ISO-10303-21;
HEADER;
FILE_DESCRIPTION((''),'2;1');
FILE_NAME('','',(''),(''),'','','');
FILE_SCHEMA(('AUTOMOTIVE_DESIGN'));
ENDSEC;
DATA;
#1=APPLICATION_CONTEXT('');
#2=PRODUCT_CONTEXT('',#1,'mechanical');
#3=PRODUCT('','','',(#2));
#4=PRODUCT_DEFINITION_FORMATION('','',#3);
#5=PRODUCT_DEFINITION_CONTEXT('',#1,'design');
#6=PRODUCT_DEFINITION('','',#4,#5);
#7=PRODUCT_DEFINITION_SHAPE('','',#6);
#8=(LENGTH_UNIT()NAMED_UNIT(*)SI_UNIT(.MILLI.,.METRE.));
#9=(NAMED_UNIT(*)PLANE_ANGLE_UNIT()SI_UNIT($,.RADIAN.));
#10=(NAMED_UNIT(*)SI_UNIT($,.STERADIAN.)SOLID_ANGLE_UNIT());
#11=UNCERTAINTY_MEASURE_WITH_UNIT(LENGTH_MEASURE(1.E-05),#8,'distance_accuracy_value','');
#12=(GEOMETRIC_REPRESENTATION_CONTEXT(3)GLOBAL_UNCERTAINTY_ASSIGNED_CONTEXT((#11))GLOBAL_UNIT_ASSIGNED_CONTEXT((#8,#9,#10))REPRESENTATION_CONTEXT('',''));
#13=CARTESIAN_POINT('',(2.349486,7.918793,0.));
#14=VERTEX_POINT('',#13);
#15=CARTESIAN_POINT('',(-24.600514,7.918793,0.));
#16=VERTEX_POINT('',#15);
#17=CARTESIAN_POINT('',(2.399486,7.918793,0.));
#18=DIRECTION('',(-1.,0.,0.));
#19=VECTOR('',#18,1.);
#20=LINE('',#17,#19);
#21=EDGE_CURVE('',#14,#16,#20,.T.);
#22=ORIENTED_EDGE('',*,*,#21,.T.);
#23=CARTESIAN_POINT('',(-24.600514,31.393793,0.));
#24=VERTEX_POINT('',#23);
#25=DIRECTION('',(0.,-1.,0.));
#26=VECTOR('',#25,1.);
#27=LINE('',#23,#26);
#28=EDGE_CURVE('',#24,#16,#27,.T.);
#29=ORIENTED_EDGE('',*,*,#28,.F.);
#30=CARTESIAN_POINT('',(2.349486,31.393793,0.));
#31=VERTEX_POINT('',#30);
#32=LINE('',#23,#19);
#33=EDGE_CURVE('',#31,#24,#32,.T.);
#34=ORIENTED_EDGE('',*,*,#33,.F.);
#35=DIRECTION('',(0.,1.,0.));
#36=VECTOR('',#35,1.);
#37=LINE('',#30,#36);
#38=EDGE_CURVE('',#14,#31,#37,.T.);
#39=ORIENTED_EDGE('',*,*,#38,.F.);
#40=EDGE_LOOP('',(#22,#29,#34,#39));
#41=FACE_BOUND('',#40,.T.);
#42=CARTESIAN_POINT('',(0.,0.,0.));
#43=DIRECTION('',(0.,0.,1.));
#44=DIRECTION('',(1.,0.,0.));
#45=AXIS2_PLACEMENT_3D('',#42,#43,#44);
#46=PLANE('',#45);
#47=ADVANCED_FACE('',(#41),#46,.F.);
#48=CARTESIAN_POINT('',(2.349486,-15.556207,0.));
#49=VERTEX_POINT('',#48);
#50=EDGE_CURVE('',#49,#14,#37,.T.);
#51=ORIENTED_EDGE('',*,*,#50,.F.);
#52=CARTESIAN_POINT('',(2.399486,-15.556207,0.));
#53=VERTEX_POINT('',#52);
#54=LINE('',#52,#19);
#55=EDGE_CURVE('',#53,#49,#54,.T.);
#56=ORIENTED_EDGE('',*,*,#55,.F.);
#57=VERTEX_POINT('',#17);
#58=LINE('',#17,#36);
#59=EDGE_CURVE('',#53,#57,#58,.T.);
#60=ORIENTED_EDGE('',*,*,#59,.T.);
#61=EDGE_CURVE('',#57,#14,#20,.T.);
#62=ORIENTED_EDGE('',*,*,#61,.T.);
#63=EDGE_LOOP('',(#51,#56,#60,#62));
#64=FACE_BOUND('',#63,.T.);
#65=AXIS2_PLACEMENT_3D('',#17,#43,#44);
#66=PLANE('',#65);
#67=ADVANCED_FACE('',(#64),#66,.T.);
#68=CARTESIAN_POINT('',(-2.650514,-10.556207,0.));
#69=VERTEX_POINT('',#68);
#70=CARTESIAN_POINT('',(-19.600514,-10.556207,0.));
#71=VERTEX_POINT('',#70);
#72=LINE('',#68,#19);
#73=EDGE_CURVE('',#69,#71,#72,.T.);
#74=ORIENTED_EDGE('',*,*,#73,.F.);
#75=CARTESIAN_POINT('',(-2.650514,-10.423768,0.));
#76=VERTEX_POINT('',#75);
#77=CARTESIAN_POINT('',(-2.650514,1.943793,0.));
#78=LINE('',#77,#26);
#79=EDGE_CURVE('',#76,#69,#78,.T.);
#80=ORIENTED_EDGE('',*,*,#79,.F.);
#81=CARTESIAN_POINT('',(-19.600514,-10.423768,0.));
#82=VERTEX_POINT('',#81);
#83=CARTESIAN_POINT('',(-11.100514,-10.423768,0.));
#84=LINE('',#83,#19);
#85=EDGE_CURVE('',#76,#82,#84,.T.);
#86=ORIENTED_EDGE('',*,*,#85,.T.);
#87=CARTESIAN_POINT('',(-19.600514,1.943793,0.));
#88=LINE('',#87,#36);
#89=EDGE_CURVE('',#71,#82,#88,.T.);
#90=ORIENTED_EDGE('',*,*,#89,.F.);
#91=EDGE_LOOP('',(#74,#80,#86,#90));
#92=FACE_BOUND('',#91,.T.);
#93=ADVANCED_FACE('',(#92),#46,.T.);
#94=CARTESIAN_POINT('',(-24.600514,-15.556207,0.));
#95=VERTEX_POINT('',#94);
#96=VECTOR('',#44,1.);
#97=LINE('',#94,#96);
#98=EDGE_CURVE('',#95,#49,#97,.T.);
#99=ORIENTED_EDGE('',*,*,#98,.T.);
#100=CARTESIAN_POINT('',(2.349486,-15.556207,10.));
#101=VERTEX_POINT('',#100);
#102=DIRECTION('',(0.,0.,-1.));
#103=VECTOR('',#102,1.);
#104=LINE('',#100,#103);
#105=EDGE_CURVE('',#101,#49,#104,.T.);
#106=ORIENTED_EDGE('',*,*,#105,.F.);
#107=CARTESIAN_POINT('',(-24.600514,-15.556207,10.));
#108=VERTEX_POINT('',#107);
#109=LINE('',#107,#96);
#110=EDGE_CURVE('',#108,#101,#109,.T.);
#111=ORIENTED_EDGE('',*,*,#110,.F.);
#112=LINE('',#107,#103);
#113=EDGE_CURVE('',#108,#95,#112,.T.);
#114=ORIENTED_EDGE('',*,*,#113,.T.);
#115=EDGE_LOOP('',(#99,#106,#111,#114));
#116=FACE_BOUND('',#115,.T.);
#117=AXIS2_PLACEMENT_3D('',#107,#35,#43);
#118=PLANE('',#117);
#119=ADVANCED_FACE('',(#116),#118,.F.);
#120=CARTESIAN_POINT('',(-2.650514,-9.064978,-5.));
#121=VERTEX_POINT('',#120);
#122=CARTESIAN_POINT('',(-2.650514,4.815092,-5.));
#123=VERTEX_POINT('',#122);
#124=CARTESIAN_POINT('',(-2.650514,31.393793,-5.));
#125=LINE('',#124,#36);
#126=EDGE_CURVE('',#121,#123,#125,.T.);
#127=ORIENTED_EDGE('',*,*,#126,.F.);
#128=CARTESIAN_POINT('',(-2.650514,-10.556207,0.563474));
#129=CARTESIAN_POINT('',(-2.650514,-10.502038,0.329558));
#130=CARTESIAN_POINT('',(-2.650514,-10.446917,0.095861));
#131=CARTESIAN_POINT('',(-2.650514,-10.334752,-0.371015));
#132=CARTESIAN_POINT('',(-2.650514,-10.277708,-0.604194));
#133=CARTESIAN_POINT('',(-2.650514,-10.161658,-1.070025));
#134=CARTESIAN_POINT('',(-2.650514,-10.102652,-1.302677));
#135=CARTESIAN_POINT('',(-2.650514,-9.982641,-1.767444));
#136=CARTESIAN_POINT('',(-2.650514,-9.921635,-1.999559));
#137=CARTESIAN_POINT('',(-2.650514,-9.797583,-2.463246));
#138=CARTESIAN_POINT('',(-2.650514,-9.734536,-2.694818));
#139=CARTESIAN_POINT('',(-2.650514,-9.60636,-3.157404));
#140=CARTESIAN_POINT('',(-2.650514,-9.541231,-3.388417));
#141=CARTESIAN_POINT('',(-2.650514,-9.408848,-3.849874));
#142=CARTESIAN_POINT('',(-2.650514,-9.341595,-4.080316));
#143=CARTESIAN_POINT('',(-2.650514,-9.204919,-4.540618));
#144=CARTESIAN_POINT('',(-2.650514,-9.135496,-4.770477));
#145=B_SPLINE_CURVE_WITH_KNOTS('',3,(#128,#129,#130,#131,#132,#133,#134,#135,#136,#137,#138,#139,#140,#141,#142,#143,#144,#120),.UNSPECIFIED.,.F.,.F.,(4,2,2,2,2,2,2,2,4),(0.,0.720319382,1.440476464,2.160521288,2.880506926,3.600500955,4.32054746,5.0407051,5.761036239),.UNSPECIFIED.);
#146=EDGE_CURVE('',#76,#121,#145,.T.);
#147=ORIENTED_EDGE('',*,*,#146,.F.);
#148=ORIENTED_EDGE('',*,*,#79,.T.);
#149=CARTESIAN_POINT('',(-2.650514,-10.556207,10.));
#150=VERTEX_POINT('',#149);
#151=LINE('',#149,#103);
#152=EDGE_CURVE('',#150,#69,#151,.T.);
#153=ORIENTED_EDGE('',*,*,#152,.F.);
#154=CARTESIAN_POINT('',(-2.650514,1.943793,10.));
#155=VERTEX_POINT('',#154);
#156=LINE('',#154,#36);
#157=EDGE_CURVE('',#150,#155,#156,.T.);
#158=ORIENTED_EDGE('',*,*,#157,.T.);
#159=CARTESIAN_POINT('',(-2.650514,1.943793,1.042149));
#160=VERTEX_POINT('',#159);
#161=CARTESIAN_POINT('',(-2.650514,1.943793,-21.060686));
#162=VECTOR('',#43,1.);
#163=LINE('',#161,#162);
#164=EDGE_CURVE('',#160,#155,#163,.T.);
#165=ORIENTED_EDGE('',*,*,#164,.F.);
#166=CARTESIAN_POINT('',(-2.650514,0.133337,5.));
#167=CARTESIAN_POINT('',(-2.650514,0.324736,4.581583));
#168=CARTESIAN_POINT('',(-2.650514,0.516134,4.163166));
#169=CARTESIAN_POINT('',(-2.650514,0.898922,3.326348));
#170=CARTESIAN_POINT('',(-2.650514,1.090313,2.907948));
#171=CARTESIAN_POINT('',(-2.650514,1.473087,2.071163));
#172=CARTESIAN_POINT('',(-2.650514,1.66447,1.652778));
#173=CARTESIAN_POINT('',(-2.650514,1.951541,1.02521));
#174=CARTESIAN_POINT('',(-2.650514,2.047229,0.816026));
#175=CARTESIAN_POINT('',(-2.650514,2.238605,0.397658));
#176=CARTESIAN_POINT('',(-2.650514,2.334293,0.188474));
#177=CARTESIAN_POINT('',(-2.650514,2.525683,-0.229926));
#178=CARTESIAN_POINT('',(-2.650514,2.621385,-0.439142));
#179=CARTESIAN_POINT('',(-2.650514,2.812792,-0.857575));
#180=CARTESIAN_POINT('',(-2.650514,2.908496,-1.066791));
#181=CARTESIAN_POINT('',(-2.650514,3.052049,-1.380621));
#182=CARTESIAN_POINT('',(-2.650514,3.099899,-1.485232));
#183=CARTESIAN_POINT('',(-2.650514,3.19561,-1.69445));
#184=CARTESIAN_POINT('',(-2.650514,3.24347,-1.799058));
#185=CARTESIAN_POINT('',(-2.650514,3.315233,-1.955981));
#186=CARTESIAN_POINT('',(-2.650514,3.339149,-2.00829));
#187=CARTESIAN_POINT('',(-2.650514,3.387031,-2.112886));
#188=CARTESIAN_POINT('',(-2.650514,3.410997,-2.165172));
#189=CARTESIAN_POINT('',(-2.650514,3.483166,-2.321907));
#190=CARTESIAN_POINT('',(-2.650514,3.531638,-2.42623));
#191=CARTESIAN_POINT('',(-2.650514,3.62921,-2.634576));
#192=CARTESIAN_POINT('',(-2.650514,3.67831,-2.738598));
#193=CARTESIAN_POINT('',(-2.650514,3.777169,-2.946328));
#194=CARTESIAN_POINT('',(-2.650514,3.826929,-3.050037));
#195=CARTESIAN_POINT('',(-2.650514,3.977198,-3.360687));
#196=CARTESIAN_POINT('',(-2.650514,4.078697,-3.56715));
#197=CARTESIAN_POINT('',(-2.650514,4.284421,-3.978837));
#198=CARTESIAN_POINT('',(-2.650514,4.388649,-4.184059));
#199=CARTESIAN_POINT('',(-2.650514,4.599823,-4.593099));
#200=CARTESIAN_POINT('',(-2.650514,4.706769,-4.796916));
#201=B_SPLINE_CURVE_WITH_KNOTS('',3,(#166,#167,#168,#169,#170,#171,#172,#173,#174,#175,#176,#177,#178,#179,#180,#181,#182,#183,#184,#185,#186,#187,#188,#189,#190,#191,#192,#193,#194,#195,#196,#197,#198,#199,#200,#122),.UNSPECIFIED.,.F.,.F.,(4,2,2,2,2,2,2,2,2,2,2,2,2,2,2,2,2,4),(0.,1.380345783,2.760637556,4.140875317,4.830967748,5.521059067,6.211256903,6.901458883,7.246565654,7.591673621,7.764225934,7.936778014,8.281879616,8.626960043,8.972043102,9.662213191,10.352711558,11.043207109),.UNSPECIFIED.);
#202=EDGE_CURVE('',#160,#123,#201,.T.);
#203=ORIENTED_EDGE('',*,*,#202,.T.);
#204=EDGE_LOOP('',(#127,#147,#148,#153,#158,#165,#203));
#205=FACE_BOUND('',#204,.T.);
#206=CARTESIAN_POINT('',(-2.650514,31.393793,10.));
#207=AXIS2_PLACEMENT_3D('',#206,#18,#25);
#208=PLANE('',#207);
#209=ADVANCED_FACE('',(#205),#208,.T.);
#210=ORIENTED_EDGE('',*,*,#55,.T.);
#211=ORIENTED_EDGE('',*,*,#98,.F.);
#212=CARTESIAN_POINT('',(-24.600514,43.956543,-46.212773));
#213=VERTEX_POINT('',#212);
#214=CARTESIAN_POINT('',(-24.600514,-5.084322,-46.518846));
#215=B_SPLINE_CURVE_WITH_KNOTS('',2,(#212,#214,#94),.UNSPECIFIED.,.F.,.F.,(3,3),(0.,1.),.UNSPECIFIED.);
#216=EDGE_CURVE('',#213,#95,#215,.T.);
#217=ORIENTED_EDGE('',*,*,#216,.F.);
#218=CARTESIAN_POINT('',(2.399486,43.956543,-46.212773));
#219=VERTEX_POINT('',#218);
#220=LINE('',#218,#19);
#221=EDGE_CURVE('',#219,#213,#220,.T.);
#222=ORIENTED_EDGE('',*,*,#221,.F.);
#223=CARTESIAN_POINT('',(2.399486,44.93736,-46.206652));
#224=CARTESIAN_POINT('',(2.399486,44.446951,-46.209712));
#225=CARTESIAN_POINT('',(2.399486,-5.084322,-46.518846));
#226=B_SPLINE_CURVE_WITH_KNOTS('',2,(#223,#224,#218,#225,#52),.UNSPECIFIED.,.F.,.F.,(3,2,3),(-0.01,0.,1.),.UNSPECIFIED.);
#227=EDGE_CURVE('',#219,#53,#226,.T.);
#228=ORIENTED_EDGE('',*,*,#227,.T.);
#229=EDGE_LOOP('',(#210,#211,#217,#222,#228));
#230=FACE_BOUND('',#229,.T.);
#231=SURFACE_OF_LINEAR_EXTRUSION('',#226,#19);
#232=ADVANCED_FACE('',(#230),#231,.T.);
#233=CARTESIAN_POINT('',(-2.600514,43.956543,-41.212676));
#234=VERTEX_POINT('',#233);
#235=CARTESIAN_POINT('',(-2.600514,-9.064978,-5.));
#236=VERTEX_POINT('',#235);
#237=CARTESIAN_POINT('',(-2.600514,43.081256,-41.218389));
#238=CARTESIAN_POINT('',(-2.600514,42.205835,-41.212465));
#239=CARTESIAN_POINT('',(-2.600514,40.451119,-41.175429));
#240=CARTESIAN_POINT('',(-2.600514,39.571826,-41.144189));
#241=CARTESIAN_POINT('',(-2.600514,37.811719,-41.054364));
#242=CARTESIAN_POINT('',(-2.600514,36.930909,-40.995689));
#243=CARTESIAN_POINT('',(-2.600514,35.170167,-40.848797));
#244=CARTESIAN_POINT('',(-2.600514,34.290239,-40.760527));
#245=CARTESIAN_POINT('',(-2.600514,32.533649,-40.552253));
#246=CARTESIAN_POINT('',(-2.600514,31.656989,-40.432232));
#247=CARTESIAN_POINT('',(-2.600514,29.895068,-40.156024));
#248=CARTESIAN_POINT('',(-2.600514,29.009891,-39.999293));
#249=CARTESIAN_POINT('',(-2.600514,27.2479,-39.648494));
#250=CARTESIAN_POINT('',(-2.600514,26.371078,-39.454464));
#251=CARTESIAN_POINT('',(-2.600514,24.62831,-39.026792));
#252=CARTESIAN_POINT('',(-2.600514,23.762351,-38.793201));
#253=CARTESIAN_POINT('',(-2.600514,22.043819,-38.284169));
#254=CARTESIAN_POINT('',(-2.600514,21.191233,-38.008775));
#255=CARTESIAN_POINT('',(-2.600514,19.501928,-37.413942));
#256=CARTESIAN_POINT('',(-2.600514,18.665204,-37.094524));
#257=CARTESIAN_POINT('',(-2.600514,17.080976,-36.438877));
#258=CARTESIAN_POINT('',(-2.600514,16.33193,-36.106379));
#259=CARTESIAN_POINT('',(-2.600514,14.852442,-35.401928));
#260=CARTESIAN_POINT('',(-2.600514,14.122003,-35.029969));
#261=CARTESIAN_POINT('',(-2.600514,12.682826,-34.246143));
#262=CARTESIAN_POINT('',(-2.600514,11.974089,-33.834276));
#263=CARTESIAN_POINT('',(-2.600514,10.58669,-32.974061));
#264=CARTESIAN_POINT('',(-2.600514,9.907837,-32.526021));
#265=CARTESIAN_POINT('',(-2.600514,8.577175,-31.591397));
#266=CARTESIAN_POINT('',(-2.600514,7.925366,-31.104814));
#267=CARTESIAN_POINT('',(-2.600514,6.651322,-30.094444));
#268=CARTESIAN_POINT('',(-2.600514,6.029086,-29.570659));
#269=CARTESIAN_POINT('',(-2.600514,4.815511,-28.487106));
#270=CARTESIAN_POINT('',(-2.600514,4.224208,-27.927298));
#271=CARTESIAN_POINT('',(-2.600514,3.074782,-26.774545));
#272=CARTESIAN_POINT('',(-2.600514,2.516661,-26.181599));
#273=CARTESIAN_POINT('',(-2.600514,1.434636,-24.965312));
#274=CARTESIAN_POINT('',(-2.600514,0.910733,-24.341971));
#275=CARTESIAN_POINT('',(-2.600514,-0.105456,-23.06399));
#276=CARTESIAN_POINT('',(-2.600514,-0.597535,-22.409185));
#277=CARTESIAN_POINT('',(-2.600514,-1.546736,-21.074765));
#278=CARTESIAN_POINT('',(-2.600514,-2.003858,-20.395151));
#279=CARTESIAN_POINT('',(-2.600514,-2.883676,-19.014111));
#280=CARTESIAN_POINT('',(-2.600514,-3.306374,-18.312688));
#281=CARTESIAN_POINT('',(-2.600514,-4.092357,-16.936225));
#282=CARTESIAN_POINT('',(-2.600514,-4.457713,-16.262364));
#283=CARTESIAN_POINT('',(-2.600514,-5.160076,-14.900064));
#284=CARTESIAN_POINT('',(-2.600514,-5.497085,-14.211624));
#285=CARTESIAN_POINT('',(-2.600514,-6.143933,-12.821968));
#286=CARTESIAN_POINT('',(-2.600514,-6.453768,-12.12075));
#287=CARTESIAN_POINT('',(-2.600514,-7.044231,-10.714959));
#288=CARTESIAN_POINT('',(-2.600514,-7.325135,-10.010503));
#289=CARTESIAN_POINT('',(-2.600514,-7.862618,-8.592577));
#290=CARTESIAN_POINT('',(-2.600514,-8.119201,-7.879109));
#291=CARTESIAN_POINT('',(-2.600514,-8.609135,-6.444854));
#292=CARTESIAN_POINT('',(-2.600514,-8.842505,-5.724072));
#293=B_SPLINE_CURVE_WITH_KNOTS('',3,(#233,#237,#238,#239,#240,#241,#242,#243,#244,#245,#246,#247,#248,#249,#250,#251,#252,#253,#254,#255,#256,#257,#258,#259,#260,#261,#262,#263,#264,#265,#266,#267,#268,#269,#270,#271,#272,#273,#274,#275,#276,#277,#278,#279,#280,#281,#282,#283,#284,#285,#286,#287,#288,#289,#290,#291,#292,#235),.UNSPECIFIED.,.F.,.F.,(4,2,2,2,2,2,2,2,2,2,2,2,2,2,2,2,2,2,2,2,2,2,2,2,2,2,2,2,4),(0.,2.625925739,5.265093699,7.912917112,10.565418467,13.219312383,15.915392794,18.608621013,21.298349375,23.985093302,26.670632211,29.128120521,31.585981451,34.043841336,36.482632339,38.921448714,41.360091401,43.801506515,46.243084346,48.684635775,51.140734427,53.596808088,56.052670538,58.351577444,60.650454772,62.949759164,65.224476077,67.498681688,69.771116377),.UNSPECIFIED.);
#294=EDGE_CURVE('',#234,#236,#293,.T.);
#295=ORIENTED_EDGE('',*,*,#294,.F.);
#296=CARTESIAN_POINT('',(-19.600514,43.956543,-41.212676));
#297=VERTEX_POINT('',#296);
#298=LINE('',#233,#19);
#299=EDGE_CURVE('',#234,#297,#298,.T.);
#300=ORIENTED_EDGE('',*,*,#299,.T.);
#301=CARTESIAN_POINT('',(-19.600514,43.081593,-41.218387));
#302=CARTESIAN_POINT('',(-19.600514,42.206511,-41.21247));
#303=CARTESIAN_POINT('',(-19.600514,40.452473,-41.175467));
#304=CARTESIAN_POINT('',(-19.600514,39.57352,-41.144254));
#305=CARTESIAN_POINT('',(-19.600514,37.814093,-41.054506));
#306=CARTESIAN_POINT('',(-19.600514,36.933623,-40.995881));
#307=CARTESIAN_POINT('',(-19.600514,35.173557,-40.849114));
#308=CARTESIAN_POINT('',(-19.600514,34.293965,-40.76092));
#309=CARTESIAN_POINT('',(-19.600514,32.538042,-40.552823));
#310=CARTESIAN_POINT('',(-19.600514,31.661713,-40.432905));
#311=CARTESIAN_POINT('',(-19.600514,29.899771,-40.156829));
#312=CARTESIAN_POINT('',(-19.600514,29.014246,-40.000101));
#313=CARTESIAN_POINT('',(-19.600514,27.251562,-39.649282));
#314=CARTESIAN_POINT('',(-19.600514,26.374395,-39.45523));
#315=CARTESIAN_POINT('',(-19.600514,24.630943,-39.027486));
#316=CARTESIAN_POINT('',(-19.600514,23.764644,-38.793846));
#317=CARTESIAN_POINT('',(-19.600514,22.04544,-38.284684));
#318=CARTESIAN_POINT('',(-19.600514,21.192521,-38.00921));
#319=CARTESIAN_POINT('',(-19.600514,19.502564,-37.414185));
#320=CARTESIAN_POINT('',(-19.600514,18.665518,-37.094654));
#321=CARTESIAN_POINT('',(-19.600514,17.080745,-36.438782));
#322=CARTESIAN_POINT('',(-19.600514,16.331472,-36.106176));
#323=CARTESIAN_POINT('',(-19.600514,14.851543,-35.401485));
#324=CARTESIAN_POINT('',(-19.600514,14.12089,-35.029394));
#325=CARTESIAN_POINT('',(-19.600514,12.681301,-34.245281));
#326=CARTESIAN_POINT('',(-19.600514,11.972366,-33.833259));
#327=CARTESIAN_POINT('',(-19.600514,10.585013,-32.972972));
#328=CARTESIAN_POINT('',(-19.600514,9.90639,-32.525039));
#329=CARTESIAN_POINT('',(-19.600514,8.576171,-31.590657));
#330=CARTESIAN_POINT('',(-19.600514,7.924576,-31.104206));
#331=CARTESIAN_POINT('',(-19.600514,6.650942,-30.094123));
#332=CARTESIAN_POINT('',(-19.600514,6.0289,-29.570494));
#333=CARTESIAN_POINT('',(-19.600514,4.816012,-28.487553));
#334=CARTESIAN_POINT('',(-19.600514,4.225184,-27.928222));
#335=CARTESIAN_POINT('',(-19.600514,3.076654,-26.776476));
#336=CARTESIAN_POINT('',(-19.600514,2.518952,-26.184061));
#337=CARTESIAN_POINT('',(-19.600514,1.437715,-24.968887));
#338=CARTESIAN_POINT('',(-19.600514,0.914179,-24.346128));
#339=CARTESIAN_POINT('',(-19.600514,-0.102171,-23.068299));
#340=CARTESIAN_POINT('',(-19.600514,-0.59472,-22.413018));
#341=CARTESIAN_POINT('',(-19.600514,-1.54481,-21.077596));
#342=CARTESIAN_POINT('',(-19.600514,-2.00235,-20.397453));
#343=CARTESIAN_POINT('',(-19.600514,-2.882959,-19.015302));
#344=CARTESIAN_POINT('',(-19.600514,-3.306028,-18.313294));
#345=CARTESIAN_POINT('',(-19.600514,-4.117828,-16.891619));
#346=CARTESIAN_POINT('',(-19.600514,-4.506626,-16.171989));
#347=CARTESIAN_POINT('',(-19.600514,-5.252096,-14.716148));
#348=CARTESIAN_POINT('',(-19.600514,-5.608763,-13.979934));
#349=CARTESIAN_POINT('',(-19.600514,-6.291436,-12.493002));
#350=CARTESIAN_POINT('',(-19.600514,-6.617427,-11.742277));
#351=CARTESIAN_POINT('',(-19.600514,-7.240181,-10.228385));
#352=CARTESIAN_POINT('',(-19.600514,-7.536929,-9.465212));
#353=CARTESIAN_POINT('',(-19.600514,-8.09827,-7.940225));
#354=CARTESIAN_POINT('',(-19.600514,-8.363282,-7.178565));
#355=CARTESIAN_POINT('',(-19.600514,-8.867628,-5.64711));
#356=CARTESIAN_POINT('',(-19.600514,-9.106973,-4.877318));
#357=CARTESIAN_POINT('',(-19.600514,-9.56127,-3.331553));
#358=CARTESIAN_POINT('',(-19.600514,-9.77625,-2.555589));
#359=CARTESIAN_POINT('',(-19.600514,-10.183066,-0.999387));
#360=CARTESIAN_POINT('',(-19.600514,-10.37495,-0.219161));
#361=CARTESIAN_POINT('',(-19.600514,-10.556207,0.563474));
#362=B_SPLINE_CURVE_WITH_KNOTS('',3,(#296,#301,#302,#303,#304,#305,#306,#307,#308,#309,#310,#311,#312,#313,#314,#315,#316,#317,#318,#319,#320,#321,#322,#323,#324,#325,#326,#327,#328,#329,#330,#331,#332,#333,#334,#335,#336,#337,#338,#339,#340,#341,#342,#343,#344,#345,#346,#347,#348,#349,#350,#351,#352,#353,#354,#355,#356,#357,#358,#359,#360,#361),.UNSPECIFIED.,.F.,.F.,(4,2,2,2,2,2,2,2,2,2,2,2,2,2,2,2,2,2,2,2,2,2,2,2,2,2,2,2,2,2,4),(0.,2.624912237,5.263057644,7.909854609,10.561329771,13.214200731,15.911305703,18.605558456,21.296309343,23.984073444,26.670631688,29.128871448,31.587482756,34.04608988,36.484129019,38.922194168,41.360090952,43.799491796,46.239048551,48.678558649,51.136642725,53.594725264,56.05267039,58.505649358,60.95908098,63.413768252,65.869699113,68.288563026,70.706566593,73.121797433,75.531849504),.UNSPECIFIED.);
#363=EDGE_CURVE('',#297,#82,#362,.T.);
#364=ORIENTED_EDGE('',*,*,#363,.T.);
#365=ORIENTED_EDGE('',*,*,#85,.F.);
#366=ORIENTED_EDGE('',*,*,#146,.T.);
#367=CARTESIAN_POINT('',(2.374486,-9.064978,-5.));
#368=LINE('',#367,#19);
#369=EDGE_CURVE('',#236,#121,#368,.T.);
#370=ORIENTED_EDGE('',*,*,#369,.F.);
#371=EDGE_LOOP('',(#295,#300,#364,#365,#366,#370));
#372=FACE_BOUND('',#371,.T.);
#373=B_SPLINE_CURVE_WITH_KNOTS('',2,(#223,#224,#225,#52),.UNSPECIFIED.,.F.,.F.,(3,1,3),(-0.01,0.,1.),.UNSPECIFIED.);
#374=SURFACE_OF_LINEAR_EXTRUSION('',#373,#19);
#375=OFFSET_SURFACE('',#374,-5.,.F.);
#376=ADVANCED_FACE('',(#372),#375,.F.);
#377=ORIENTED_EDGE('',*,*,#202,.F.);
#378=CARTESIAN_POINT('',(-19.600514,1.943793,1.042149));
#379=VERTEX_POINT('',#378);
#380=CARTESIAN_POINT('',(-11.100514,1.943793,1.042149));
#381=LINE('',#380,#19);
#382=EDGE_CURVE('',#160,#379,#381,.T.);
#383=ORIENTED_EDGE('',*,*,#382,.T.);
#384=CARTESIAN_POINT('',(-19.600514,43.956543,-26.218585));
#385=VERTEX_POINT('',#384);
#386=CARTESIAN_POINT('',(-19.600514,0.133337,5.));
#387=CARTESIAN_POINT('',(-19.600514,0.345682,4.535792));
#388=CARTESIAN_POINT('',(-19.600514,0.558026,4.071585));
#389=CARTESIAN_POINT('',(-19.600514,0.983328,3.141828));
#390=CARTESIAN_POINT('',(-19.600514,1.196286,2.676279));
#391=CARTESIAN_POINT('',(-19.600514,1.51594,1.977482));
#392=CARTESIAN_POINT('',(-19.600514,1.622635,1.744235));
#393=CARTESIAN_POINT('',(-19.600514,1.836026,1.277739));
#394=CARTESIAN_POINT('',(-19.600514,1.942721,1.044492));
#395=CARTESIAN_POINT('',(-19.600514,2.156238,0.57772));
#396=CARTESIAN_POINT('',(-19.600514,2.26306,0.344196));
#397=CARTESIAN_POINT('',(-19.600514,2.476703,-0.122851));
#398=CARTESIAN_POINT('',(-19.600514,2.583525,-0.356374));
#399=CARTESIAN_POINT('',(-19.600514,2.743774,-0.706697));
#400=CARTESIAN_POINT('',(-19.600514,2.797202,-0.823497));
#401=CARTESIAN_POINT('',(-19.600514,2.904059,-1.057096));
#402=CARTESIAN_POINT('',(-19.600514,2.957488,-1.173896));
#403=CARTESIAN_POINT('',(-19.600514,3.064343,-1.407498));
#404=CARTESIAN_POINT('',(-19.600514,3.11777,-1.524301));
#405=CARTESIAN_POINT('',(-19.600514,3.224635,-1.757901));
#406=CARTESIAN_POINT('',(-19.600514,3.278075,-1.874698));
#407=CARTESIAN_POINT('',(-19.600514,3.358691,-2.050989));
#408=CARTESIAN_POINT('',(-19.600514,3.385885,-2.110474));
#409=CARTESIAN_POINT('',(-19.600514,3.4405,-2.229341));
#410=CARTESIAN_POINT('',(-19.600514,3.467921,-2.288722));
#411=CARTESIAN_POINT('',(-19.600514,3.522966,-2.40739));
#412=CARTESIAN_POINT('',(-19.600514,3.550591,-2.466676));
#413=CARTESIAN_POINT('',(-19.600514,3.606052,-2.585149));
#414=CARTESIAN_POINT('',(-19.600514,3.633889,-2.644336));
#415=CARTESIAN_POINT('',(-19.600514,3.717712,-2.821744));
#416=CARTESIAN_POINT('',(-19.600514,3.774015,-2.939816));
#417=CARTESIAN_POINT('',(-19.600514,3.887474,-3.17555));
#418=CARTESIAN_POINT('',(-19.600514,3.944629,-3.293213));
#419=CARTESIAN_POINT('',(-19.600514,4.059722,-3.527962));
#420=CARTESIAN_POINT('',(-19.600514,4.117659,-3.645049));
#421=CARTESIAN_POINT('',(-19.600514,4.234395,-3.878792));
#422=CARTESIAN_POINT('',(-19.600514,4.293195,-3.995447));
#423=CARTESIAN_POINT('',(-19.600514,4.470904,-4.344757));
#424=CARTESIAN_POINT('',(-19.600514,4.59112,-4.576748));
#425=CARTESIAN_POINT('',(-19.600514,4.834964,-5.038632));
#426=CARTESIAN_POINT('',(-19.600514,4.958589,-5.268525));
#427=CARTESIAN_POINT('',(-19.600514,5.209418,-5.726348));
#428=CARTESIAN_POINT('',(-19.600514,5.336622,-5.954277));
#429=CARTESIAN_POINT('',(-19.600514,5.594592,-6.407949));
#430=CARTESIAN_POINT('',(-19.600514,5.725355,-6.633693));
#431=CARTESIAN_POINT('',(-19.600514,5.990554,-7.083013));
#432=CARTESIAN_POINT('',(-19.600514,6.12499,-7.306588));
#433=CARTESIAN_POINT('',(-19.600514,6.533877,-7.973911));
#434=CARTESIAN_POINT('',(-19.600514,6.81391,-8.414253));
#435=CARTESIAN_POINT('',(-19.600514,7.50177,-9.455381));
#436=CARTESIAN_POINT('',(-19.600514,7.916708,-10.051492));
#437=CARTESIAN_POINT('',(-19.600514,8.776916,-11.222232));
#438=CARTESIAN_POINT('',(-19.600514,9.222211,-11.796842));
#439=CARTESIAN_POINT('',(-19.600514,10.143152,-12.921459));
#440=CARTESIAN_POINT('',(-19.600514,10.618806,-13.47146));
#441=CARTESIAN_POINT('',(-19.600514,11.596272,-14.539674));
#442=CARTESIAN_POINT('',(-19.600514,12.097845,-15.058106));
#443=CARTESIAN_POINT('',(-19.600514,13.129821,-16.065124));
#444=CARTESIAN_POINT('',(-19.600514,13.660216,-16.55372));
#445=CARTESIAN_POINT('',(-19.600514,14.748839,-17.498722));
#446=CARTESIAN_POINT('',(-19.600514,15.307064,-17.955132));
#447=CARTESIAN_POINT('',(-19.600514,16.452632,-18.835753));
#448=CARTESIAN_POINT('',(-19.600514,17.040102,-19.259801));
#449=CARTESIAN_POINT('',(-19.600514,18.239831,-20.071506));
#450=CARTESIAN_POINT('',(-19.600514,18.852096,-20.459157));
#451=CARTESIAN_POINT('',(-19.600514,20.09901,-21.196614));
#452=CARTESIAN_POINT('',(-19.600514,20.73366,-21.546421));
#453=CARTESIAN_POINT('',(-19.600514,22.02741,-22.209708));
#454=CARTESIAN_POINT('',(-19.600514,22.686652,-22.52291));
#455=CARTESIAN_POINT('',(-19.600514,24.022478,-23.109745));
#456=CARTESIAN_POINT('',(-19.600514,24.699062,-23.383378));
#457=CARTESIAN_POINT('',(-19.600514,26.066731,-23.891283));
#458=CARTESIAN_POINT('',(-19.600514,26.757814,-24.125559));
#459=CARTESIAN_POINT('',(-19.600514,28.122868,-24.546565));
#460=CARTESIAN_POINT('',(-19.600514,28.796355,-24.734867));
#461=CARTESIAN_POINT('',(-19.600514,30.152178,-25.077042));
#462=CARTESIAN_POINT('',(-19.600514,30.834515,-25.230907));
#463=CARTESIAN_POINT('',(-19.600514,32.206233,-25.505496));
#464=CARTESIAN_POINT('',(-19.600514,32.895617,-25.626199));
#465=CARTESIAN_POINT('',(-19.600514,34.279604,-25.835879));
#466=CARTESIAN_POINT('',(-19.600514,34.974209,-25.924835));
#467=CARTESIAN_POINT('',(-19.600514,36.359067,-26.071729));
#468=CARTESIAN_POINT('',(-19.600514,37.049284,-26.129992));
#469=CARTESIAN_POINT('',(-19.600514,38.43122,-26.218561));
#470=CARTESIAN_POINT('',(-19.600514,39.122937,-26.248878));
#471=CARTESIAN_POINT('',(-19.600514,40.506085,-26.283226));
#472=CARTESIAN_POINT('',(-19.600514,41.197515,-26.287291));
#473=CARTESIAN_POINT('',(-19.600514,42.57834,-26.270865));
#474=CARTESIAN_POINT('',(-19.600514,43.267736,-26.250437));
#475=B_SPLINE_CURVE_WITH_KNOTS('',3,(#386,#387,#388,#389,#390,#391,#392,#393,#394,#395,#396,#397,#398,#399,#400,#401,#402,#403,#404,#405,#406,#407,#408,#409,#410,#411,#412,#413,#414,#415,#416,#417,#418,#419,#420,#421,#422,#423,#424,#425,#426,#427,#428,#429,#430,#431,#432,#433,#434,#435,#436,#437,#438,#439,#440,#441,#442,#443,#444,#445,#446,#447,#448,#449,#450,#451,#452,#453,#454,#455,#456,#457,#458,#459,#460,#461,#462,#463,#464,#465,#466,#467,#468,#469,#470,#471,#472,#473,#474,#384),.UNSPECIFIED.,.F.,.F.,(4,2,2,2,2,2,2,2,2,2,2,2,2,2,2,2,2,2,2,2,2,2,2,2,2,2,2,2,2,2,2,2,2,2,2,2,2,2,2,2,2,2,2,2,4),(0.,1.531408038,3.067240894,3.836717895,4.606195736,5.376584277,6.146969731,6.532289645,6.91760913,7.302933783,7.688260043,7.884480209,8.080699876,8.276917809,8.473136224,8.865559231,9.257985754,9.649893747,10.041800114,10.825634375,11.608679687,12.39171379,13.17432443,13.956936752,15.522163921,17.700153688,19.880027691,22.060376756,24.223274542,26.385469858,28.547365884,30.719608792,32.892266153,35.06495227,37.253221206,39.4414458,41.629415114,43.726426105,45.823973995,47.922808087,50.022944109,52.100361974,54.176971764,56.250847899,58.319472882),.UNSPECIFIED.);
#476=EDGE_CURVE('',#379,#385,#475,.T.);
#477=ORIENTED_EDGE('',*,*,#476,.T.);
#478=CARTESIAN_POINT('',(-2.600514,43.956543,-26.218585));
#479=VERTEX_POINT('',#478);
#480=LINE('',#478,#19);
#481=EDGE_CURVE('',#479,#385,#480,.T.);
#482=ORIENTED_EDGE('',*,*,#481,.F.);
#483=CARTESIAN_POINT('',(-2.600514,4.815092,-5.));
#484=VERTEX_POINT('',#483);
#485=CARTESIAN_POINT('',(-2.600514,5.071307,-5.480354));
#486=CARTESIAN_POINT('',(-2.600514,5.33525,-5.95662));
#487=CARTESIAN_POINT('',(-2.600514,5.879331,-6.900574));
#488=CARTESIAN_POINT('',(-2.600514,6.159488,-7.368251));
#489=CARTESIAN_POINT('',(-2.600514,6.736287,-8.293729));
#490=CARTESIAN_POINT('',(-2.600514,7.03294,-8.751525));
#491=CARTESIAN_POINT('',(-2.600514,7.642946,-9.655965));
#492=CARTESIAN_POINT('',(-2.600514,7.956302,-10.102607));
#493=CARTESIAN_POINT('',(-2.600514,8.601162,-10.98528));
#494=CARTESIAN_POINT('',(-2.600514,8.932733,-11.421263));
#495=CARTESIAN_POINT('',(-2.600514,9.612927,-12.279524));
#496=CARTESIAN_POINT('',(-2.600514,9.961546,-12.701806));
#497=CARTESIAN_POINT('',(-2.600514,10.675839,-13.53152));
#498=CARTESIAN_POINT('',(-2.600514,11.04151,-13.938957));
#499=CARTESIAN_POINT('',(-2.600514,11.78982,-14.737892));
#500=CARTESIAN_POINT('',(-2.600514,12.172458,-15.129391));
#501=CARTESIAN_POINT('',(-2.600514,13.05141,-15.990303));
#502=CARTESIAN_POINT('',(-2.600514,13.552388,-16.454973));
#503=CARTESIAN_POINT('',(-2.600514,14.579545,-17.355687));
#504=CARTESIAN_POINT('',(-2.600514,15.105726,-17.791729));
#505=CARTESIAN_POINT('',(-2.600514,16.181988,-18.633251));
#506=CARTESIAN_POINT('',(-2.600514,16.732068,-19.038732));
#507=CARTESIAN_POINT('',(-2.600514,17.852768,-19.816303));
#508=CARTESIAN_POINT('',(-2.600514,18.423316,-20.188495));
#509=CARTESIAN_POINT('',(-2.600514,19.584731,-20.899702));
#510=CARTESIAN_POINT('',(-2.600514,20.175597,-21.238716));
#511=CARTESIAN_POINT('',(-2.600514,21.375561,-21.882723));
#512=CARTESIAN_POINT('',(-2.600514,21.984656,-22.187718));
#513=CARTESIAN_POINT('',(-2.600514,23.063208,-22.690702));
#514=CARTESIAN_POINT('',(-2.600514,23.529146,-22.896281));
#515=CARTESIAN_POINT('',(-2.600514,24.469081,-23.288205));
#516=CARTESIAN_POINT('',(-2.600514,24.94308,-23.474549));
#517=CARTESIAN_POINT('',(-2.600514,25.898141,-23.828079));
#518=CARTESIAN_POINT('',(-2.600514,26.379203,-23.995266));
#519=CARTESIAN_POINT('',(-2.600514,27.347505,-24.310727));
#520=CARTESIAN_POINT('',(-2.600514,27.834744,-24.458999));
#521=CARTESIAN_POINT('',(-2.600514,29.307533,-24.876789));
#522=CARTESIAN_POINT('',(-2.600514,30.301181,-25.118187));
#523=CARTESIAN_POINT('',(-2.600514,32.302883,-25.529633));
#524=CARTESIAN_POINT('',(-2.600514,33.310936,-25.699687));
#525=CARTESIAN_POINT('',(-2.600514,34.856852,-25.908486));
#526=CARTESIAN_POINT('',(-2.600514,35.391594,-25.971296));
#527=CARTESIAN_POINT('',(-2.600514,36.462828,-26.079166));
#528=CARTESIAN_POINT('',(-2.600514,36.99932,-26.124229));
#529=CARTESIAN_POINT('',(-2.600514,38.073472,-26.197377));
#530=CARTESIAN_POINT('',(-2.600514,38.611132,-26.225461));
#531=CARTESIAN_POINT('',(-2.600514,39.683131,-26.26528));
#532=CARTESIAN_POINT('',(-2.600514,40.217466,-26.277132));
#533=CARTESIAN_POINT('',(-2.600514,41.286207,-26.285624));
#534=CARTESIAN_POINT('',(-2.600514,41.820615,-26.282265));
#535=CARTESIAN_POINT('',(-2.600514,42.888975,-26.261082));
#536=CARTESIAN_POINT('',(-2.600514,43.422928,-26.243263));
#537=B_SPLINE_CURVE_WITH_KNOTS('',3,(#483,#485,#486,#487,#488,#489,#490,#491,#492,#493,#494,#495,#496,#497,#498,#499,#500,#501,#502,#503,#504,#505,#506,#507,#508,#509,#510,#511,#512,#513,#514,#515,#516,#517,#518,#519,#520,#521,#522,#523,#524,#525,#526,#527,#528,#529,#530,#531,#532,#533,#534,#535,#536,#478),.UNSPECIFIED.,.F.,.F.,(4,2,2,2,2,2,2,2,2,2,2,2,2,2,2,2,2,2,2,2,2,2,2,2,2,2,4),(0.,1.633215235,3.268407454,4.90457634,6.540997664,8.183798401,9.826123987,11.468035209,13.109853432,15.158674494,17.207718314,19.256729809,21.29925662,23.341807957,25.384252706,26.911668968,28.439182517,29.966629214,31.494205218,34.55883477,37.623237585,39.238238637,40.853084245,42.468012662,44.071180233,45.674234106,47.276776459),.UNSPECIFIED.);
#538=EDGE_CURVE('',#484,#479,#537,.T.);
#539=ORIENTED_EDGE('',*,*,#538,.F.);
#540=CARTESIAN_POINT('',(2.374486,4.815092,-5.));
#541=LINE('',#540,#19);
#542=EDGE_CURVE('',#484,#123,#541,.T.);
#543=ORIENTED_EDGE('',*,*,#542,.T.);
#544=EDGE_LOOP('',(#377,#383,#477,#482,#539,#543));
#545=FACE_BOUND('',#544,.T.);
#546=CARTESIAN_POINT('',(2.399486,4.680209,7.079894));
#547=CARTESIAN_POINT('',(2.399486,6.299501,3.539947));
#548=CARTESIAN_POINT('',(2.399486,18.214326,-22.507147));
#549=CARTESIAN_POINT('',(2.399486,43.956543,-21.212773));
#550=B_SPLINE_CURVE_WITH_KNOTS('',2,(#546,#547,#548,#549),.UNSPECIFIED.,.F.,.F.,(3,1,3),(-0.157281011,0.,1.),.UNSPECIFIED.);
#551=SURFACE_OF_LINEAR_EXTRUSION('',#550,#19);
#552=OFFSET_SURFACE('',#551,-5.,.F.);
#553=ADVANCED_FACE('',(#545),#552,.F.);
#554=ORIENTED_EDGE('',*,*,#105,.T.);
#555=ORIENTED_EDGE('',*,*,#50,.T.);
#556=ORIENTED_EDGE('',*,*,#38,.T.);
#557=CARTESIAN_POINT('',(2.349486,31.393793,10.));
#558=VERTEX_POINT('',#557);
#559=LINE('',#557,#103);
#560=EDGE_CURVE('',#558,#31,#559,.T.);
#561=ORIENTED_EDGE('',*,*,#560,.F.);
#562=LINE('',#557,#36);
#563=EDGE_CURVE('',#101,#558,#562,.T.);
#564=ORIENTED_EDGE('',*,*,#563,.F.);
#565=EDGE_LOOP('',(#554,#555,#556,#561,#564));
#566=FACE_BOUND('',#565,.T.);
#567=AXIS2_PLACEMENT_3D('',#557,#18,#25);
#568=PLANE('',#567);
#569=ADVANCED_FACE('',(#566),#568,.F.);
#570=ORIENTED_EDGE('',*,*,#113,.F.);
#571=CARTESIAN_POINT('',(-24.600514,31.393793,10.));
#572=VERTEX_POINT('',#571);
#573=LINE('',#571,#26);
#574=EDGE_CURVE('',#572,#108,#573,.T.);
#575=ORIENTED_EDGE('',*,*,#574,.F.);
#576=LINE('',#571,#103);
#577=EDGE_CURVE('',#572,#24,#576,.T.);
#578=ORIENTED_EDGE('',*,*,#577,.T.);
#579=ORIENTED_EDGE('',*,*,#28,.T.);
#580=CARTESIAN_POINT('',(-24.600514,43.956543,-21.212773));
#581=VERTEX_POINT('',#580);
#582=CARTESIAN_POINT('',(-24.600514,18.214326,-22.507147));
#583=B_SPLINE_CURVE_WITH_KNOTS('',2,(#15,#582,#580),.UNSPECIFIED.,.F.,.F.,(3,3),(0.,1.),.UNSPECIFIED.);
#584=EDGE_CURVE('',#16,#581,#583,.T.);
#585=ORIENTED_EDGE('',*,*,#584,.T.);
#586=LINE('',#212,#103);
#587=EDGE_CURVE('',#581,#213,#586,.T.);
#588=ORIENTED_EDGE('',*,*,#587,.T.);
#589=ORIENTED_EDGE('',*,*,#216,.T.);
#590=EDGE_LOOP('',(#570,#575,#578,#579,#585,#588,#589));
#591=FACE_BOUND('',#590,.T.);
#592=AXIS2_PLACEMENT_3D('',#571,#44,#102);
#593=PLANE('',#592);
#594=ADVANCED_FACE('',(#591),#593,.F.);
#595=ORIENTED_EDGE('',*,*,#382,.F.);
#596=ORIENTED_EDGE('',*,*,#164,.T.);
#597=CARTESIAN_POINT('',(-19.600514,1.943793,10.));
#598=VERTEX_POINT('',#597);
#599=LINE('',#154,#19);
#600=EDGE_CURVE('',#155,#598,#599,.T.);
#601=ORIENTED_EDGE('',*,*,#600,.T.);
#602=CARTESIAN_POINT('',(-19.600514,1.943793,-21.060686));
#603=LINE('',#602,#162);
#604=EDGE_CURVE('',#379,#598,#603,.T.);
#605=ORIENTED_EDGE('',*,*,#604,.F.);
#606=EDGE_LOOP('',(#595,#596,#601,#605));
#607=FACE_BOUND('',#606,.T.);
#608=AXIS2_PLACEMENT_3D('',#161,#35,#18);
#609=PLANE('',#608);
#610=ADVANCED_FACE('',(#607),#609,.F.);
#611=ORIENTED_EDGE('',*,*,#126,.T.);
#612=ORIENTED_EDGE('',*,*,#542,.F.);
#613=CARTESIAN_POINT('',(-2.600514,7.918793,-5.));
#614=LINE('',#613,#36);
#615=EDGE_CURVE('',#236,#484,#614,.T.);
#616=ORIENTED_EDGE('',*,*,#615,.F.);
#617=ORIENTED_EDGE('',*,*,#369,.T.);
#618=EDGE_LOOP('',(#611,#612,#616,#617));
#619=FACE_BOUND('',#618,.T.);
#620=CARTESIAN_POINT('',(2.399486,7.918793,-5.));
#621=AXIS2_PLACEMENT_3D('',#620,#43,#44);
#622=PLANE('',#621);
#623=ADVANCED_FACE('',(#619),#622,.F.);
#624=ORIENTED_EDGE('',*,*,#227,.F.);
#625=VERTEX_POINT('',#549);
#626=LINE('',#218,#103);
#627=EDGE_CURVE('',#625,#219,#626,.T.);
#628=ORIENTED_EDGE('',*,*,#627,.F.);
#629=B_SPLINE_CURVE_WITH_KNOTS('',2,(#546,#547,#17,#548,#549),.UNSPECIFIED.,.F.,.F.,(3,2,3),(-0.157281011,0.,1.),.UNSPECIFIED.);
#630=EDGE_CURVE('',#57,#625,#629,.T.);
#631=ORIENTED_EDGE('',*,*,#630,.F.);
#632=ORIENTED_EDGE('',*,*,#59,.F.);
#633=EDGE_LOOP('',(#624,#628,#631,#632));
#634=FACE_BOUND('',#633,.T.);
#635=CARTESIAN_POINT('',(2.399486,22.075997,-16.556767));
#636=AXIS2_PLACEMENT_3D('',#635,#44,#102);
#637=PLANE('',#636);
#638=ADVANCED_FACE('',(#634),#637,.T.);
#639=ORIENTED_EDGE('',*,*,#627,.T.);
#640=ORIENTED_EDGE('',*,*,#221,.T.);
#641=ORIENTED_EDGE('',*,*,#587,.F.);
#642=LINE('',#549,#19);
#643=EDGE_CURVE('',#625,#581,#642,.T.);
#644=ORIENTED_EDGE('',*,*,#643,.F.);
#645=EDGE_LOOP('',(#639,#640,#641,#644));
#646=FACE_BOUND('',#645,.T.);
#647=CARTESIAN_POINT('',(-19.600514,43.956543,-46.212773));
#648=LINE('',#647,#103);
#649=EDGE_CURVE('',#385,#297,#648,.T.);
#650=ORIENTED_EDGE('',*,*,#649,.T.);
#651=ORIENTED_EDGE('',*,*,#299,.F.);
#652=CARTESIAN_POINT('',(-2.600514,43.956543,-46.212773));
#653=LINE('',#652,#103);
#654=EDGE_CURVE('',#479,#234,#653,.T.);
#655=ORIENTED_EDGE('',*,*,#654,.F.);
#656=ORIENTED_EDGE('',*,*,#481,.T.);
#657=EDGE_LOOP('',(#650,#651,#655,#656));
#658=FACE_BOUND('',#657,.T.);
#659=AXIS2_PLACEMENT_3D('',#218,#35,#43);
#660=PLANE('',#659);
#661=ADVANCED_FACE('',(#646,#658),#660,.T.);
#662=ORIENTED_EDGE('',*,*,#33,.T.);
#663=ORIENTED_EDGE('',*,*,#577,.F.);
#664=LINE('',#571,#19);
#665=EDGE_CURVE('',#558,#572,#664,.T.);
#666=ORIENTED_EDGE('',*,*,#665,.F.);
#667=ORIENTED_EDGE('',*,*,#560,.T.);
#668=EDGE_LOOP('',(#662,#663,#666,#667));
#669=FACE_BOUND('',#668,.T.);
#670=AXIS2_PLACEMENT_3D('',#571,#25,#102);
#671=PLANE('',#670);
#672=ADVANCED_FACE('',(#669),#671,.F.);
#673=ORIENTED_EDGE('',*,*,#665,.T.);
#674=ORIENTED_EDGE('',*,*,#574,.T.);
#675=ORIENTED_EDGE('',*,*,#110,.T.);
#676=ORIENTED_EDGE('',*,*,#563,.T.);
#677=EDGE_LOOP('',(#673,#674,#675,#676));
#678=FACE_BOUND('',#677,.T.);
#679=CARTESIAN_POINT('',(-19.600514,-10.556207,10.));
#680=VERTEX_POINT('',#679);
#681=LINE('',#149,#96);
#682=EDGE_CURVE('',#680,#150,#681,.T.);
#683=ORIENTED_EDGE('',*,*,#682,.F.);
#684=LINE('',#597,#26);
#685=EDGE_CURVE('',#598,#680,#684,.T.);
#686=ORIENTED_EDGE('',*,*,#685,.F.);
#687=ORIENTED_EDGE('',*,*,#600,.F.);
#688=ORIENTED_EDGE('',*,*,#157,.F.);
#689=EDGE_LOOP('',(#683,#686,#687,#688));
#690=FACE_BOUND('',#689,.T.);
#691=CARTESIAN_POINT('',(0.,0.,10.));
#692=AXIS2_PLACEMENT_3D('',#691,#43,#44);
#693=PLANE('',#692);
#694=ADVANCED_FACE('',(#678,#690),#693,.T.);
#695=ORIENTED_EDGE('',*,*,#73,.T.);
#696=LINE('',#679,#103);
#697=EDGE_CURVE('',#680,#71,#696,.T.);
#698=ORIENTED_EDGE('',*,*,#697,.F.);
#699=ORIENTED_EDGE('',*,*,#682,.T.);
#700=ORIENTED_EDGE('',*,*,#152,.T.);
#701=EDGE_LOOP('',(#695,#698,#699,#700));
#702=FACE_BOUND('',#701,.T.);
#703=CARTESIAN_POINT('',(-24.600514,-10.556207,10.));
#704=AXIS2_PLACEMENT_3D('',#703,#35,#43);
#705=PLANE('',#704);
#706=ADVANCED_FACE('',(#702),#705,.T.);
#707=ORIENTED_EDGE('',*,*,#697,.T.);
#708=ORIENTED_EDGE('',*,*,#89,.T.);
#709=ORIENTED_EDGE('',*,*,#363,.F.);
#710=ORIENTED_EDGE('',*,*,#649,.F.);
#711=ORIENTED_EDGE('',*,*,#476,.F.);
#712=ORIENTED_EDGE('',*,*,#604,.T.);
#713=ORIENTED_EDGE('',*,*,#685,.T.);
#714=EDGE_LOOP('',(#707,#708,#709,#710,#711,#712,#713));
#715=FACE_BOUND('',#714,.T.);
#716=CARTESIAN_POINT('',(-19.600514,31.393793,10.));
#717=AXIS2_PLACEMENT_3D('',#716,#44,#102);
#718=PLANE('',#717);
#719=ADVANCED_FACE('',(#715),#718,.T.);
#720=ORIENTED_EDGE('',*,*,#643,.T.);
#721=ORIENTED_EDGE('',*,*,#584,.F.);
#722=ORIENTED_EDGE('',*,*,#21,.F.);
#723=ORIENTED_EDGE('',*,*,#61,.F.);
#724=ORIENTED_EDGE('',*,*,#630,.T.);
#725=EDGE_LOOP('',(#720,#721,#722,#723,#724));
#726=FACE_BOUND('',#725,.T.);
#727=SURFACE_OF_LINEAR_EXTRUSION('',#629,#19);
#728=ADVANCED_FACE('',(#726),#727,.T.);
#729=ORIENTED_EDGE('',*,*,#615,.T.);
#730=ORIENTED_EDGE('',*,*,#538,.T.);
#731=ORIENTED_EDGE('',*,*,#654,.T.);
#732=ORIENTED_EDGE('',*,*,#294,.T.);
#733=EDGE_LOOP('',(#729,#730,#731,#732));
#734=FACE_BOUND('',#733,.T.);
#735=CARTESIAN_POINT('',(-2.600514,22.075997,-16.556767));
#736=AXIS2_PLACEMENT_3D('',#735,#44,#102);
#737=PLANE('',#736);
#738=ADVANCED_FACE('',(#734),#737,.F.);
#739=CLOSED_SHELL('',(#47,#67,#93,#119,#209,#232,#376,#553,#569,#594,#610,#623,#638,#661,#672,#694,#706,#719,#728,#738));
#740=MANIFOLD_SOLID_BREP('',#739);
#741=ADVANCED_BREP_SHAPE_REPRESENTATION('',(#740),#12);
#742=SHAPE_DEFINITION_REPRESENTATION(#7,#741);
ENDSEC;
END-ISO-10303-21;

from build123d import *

# Parameters (mm, degrees)
SKETCH1_W           = 26.95
SKETCH1_H           = 46.95
BOSS_EXTRUDE1_DEPTH = 10
BOSS_EXTRUDE2_DEPTH = 27
SHELL8_START        = -19.600513699
SHELL8_DEPTH        = 16.95
SHELL8_START_2      = -2.650513699
SHELL8_2_DEPTH      = 0.05
SKETCH2_W           = 16.95
SKETCH2_H           = 12.5
CUT_EXTRUDE4_DEPTH  = 10


with BuildPart() as part:
    # Sketch1 → Boss-Extrude1 (new body)
    with BuildSketch(Plane.XY):
        with Locations((-11.125513699, 7.918792808)):
            Rectangle(SKETCH1_W, SKETCH1_H)
    extrude(amount=BOSS_EXTRUDE1_DEPTH)

    # Sketch4 → Boss-Extrude2 (add)
    with BuildSketch(Plane.ZY.offset(24.600513699)):
        with BuildLine():
            Line((-46.212773115, 43.956542828), (-21.212773115, 43.956542828))
            add(Edge.make_bspline(
                [(-21.212773115, 43.956542828), (-22.507146557, 18.214325733), (0, 7.918792808)],
                knots=[0, 0, 0, 1, 1, 1], degree=2))
            Line((0, 7.918792808), (0, -15.556207192))
            add(Edge.make_bspline(
                [(0, -15.556207192), (-46.51884588, -5.084322465), (-46.212773115, 43.956542828)],
                knots=[0, 0, 0, 1, 1, 1], degree=2))
        make_face()
    extrude(amount=-BOSS_EXTRUDE2_DEPTH)

    # Shell8: read off the stored shape, not the designer's step
    # Shell8 outline → Shell8 (cut)
    with BuildSketch(Plane.YZ.offset(SHELL8_START)):
        with BuildLine():
            add(Edge.make_bspline(
                [(0.133337383, 5), (0.345681756, 4.535792266), (0.558026134, 4.071584534), (0.983328432, 3.141827798), (1.196286353, 2.676278794), (1.515939617, 1.977482236), (1.622634963, 1.744234684), (1.836025783, 1.277739332), (1.942721258, 1.044491531), (2.156238437, 0.577719852), (2.263060141, 0.344195974), (2.476703299, -0.122850765), (2.583524752, -0.356373626), (2.743774073, -0.7066967), (2.797202188, -0.823496798), (2.90405926, -1.057096448), (2.957488218, -1.173896), (3.064343405, -1.40749826), (3.117769635, -1.524300968), (3.224635192, -1.757900928), (3.278074521, -1.874698178), (3.358690558, -2.050988982), (3.385885066, -2.110474317), (3.440500257, -2.229341011), (3.467920939, -2.28872237), (3.522966477, -2.4073897), (3.550591329, -2.466675672), (3.606052478, -2.585148793), (3.633888775, -2.644335942), (3.717712007, -2.821743977), (3.774015221, -2.939815627), (3.887473761, -3.175549982), (3.944629094, -3.293212682), (4.059722281, -3.527962081), (4.117659001, -3.645049336), (4.234395499, -3.878791899), (4.293195274, -3.995447208), (4.470904183, -4.344756863), (4.591119744, -4.576748487), (4.746963204, -4.871943256), (4.780959441, -4.936008122), (4.815092457, -5)],
                knots=[0, 0, 0, 0, 1.531408038, 1.531408038, 3.067240894, 3.067240894, 3.836717895, 3.836717895, 4.606195736, 4.606195736, 5.376584277, 5.376584277, 6.146969731, 6.146969731, 6.532289645, 6.532289645, 6.91760913, 6.91760913, 7.302933783, 7.302933783, 7.688260043, 7.688260043, 7.884480209, 7.884480209, 8.080699876, 8.080699876, 8.276917809, 8.276917809, 8.473136224, 8.473136224, 8.865559231, 8.865559231, 9.257985754, 9.257985754, 9.649893747, 9.649893747, 10.041800114, 10.041800114, 10.825634375, 10.825634375, 11.043210189, 11.043210189, 11.043210189, 11.043210189], degree=3))
            Line((0.133337383, 5), (-10.556207192, 5))
            Line((-10.556207192, 5), (-10.556207192, 0.563474302))
            add(Edge.make_bspline(
                [(-9.064978411, -4.999999991), (-9.156570125, -4.701885385), (-9.24631398, -4.403203161), (-9.561269931, -3.331553183), (-9.77625048, -2.555588985), (-10.183066223, -0.9993865), (-10.374950059, -0.219160945), (-10.556207192, 0.563474302)],
                knots=[69.771004898, 69.771004898, 69.771004898, 69.771004898, 70.706566593, 70.706566593, 73.121797433, 73.121797433, 75.531849504, 75.531849504, 75.531849504, 75.531849504], degree=3))
            Line((-9.064978411, -4.999999991), (4.815092457, -5))
        make_face()
        with BuildLine():
            add(Edge.make_bspline(
                [(4.815092457, -5), (4.903802589, -5.16631194), (4.993436598, -5.332130884), (5.209418135, -5.726348117), (5.336622424, -5.95427718), (5.594591961, -6.407949193), (5.725355246, -6.633693259), (5.990554029, -7.083012804), (6.124989536, -7.306588277), (6.533877125, -7.973910646), (6.813909864, -8.414252757), (7.501769623, -9.45538102), (7.916708251, -10.051491595), (8.776915799, -11.222231728), (9.222210647, -11.796842257), (10.14315243, -12.921459213), (10.618805958, -13.471460251), (11.596271939, -14.539674082), (12.097844547, -15.05810607), (13.129821164, -16.06512428), (13.660215755, -16.553720139), (14.748839143, -17.498721573), (15.307064076, -17.955131594), (16.452632219, -18.835753352), (17.040102002, -19.259800533), (18.239831396, -20.071505643), (18.852095715, -20.459156614), (20.099010065, -21.196614321), (20.733660392, -21.546420557), (22.027410025, -22.209707809), (22.686652036, -22.522910303), (24.02247808, -23.109745158), (24.699061762, -23.383378322), (26.06673068, -23.891282927), (26.757814216, -24.125558955), (28.122867732, -24.546564943), (28.796354803, -24.734866604), (30.152177572, -25.077042106), (30.834515492, -25.23090712), (32.20623315, -25.505495974), (32.89561695, -25.626199435), (34.27960354, -25.835879011), (34.974209302, -25.9248354), (36.359066573, -26.071729163), (37.049283903, -26.129991675), (38.431219698, -26.218560515), (39.122937475, -26.248877708), (40.50608531, -26.283225615), (41.197514548, -26.287290879), (42.578339573, -26.270865345), (43.267736076, -26.250436697), (43.956542828, -26.218584564)],
                knots=[11.043210189, 11.043210189, 11.043210189, 11.043210189, 11.608679687, 11.608679687, 12.39171379, 12.39171379, 13.17432443, 13.17432443, 13.956936752, 13.956936752, 15.522163921, 15.522163921, 17.700153688, 17.700153688, 19.880027691, 19.880027691, 22.060376756, 22.060376756, 24.223274542, 24.223274542, 26.385469858, 26.385469858, 28.547365884, 28.547365884, 30.719608792, 30.719608792, 32.892266153, 32.892266153, 35.06495227, 35.06495227, 37.253221206, 37.253221206, 39.4414458, 39.4414458, 41.629415114, 41.629415114, 43.726426105, 43.726426105, 45.823973995, 45.823973995, 47.922808087, 47.922808087, 50.022944109, 50.022944109, 52.100361974, 52.100361974, 54.176971764, 54.176971764, 56.250847899, 56.250847899, 58.319472882, 58.319472882, 58.319472882, 58.319472882], degree=3))
            Line((4.815092457, -5), (-9.064978411, -4.999999991))
            add(Edge.make_bspline(
                [(43.956542828, -41.212675735), (43.08159333, -41.218387139), (42.206510767, -41.212470025), (40.452472812, -41.175466896), (39.573520137, -41.144254146), (37.81409322, -41.05450592), (36.933623442, -40.995881178), (35.173557367, -40.849113982), (34.293965366, -40.760919539), (32.538042346, -40.552823313), (31.661713288, -40.432904863), (29.899770644, -40.156829312), (29.014245887, -40.000101308), (27.251562235, -39.649281799), (26.374395484, -39.455229981), (24.630942511, -39.02748594), (23.764643629, -38.793845568), (22.045439839, -38.284683982), (21.192521132, -38.009209545), (19.502563594, -37.414184785), (18.66551781, -37.094654292), (17.080744635, -36.438781556), (16.331472067, -36.106175889), (14.851543336, -35.401485138), (14.120890004, -35.029394096), (12.681301321, -34.245280752), (11.972365934, -33.833258519), (10.585013137, -32.972971721), (9.906390037, -32.525039184), (8.576171468, -31.59065667), (7.924576288, -31.104206282), (6.6509416, -30.094123435), (6.028900056, -29.570493545), (4.816011624, -28.4875535), (4.22518422, -27.92822153), (3.076653554, -26.77647648), (2.518952412, -26.184061288), (1.437715478, -24.968886679), (0.914179031, -24.346127843), (-0.102171007, -23.068298687), (-0.59472033, -22.413018454), (-1.544810043, -21.077595755), (-2.002350454, -20.397453304), (-2.882958603, -19.015301999), (-3.306028267, -18.313294369), (-4.117827977, -16.891618757), (-4.506625676, -16.171989322), (-5.252096056, -14.716148432), (-5.608762794, -13.979933942), (-6.291436173, -12.493001824), (-6.617427028, -11.742276968), (-7.240180735, -10.228384956), (-7.536928694, -9.46521169), (-8.098270292, -7.940224914), (-8.363281633, -7.178564727), (-8.770075995, -5.943328274), (-8.919846996, -5.472376719), (-9.064978411, -4.999999991)],
                knots=[0, 0, 0, 0, 2.624912237, 2.624912237, 5.263057644, 5.263057644, 7.909854609, 7.909854609, 10.561329771, 10.561329771, 13.214200731, 13.214200731, 15.911305703, 15.911305703, 18.605558456, 18.605558456, 21.296309343, 21.296309343, 23.984073444, 23.984073444, 26.670631688, 26.670631688, 29.128871448, 29.128871448, 31.587482756, 31.587482756, 34.04608988, 34.04608988, 36.484129019, 36.484129019, 38.922194168, 38.922194168, 41.360090952, 41.360090952, 43.799491796, 43.799491796, 46.239048551, 46.239048551, 48.678558649, 48.678558649, 51.136642725, 51.136642725, 53.594725264, 53.594725264, 56.05267039, 56.05267039, 58.505649358, 58.505649358, 60.95908098, 60.95908098, 63.413768252, 63.413768252, 65.869699113, 65.869699113, 68.288563026, 68.288563026, 69.771004898, 69.771004898, 69.771004898, 69.771004898], degree=3))
            Line((43.956542828, -41.212675735), (43.956542828, -26.218584564))
        make_face()
    extrude(amount=SHELL8_DEPTH, mode=Mode.SUBTRACT)

    # Shell8 2 outline → Shell8 2 (cut)
    with BuildSketch(Plane.YZ.offset(SHELL8_START_2)):
        with BuildLine():
            add(Edge.make_bspline(
                [(4.815092457, -5), (4.903802589, -5.16631194), (4.993436598, -5.332130884), (5.209418135, -5.726348117), (5.336622424, -5.95427718), (5.594591961, -6.407949193), (5.725355246, -6.633693259), (5.990554029, -7.083012804), (6.124989536, -7.306588277), (6.533877125, -7.973910646), (6.813909864, -8.414252757), (7.501769623, -9.45538102), (7.916708251, -10.051491595), (8.776915799, -11.222231728), (9.222210647, -11.796842257), (10.14315243, -12.921459213), (10.618805958, -13.471460251), (11.596271939, -14.539674082), (12.097844547, -15.05810607), (13.129821164, -16.06512428), (13.660215755, -16.553720139), (14.748839143, -17.498721573), (15.307064076, -17.955131594), (16.452632219, -18.835753352), (17.040102002, -19.259800533), (18.239831396, -20.071505643), (18.852095715, -20.459156614), (20.099010065, -21.196614321), (20.733660392, -21.546420557), (22.027410025, -22.209707809), (22.686652036, -22.522910303), (24.02247808, -23.109745158), (24.699061762, -23.383378322), (26.06673068, -23.891282927), (26.757814216, -24.125558955), (28.122867732, -24.546564943), (28.796354803, -24.734866604), (30.152177572, -25.077042106), (30.834515492, -25.23090712), (32.20623315, -25.505495974), (32.89561695, -25.626199435), (34.27960354, -25.835879011), (34.974209302, -25.9248354), (36.359066573, -26.071729163), (37.049283903, -26.129991675), (38.431219698, -26.218560515), (39.122937475, -26.248877708), (40.50608531, -26.283225615), (41.197514548, -26.287290879), (42.578339573, -26.270865345), (43.267736076, -26.250436697), (43.956542828, -26.218584564)],
                knots=[11.043210189, 11.043210189, 11.043210189, 11.043210189, 11.608679687, 11.608679687, 12.39171379, 12.39171379, 13.17432443, 13.17432443, 13.956936752, 13.956936752, 15.522163921, 15.522163921, 17.700153688, 17.700153688, 19.880027691, 19.880027691, 22.060376756, 22.060376756, 24.223274542, 24.223274542, 26.385469858, 26.385469858, 28.547365884, 28.547365884, 30.719608792, 30.719608792, 32.892266153, 32.892266153, 35.06495227, 35.06495227, 37.253221206, 37.253221206, 39.4414458, 39.4414458, 41.629415114, 41.629415114, 43.726426105, 43.726426105, 45.823973995, 45.823973995, 47.922808087, 47.922808087, 50.022944109, 50.022944109, 52.100361974, 52.100361974, 54.176971764, 54.176971764, 56.250847899, 56.250847899, 58.319472882, 58.319472882, 58.319472882, 58.319472882], degree=3))
            Line((4.815092457, -5), (-9.064978411, -4.999999991))
            add(Edge.make_bspline(
                [(43.956542828, -41.212675735), (43.08159333, -41.218387139), (42.206510767, -41.212470025), (40.452472812, -41.175466896), (39.573520137, -41.144254146), (37.81409322, -41.05450592), (36.933623442, -40.995881178), (35.173557367, -40.849113982), (34.293965366, -40.760919539), (32.538042346, -40.552823313), (31.661713288, -40.432904863), (29.899770644, -40.156829312), (29.014245887, -40.000101308), (27.251562235, -39.649281799), (26.374395484, -39.455229981), (24.630942511, -39.02748594), (23.764643629, -38.793845568), (22.045439839, -38.284683982), (21.192521132, -38.009209545), (19.502563594, -37.414184785), (18.66551781, -37.094654292), (17.080744635, -36.438781556), (16.331472067, -36.106175889), (14.851543336, -35.401485138), (14.120890004, -35.029394096), (12.681301321, -34.245280752), (11.972365934, -33.833258519), (10.585013137, -32.972971721), (9.906390037, -32.525039184), (8.576171468, -31.59065667), (7.924576288, -31.104206282), (6.6509416, -30.094123435), (6.028900056, -29.570493545), (4.816011624, -28.4875535), (4.22518422, -27.92822153), (3.076653554, -26.77647648), (2.518952412, -26.184061288), (1.437715478, -24.968886679), (0.914179031, -24.346127843), (-0.102171007, -23.068298687), (-0.59472033, -22.413018454), (-1.544810043, -21.077595755), (-2.002350454, -20.397453304), (-2.882958603, -19.015301999), (-3.306028267, -18.313294369), (-4.117827977, -16.891618757), (-4.506625676, -16.171989322), (-5.252096056, -14.716148432), (-5.608762794, -13.979933942), (-6.291436173, -12.493001824), (-6.617427028, -11.742276968), (-7.240180735, -10.228384956), (-7.536928694, -9.46521169), (-8.098270292, -7.940224914), (-8.363281633, -7.178564727), (-8.770075995, -5.943328274), (-8.919846996, -5.472376719), (-9.064978411, -4.999999991)],
                knots=[0, 0, 0, 0, 2.624912237, 2.624912237, 5.263057644, 5.263057644, 7.909854609, 7.909854609, 10.561329771, 10.561329771, 13.214200731, 13.214200731, 15.911305703, 15.911305703, 18.605558456, 18.605558456, 21.296309343, 21.296309343, 23.984073444, 23.984073444, 26.670631688, 26.670631688, 29.128871448, 29.128871448, 31.587482756, 31.587482756, 34.04608988, 34.04608988, 36.484129019, 36.484129019, 38.922194168, 38.922194168, 41.360090952, 41.360090952, 43.799491796, 43.799491796, 46.239048551, 46.239048551, 48.678558649, 48.678558649, 51.136642725, 51.136642725, 53.594725264, 53.594725264, 56.05267039, 56.05267039, 58.505649358, 58.505649358, 60.95908098, 60.95908098, 63.413768252, 63.413768252, 65.869699113, 65.869699113, 68.288563026, 68.288563026, 69.771004898, 69.771004898, 69.771004898, 69.771004898], degree=3))
            Line((43.956542828, -41.212675735), (43.956542828, -26.218584564))
        make_face()
    extrude(amount=SHELL8_2_DEPTH, mode=Mode.SUBTRACT)

    # Sketch2 → Cut-Extrude4 (cut)
    with BuildSketch(Plane.XY.offset(10)):
        with Locations((-11.125513699, -4.306207192)):
            Rectangle(SKETCH2_W, SKETCH2_H)
    extrude(amount=-CUT_EXTRUDE4_DEPTH, mode=Mode.SUBTRACT)


solid = part.part
